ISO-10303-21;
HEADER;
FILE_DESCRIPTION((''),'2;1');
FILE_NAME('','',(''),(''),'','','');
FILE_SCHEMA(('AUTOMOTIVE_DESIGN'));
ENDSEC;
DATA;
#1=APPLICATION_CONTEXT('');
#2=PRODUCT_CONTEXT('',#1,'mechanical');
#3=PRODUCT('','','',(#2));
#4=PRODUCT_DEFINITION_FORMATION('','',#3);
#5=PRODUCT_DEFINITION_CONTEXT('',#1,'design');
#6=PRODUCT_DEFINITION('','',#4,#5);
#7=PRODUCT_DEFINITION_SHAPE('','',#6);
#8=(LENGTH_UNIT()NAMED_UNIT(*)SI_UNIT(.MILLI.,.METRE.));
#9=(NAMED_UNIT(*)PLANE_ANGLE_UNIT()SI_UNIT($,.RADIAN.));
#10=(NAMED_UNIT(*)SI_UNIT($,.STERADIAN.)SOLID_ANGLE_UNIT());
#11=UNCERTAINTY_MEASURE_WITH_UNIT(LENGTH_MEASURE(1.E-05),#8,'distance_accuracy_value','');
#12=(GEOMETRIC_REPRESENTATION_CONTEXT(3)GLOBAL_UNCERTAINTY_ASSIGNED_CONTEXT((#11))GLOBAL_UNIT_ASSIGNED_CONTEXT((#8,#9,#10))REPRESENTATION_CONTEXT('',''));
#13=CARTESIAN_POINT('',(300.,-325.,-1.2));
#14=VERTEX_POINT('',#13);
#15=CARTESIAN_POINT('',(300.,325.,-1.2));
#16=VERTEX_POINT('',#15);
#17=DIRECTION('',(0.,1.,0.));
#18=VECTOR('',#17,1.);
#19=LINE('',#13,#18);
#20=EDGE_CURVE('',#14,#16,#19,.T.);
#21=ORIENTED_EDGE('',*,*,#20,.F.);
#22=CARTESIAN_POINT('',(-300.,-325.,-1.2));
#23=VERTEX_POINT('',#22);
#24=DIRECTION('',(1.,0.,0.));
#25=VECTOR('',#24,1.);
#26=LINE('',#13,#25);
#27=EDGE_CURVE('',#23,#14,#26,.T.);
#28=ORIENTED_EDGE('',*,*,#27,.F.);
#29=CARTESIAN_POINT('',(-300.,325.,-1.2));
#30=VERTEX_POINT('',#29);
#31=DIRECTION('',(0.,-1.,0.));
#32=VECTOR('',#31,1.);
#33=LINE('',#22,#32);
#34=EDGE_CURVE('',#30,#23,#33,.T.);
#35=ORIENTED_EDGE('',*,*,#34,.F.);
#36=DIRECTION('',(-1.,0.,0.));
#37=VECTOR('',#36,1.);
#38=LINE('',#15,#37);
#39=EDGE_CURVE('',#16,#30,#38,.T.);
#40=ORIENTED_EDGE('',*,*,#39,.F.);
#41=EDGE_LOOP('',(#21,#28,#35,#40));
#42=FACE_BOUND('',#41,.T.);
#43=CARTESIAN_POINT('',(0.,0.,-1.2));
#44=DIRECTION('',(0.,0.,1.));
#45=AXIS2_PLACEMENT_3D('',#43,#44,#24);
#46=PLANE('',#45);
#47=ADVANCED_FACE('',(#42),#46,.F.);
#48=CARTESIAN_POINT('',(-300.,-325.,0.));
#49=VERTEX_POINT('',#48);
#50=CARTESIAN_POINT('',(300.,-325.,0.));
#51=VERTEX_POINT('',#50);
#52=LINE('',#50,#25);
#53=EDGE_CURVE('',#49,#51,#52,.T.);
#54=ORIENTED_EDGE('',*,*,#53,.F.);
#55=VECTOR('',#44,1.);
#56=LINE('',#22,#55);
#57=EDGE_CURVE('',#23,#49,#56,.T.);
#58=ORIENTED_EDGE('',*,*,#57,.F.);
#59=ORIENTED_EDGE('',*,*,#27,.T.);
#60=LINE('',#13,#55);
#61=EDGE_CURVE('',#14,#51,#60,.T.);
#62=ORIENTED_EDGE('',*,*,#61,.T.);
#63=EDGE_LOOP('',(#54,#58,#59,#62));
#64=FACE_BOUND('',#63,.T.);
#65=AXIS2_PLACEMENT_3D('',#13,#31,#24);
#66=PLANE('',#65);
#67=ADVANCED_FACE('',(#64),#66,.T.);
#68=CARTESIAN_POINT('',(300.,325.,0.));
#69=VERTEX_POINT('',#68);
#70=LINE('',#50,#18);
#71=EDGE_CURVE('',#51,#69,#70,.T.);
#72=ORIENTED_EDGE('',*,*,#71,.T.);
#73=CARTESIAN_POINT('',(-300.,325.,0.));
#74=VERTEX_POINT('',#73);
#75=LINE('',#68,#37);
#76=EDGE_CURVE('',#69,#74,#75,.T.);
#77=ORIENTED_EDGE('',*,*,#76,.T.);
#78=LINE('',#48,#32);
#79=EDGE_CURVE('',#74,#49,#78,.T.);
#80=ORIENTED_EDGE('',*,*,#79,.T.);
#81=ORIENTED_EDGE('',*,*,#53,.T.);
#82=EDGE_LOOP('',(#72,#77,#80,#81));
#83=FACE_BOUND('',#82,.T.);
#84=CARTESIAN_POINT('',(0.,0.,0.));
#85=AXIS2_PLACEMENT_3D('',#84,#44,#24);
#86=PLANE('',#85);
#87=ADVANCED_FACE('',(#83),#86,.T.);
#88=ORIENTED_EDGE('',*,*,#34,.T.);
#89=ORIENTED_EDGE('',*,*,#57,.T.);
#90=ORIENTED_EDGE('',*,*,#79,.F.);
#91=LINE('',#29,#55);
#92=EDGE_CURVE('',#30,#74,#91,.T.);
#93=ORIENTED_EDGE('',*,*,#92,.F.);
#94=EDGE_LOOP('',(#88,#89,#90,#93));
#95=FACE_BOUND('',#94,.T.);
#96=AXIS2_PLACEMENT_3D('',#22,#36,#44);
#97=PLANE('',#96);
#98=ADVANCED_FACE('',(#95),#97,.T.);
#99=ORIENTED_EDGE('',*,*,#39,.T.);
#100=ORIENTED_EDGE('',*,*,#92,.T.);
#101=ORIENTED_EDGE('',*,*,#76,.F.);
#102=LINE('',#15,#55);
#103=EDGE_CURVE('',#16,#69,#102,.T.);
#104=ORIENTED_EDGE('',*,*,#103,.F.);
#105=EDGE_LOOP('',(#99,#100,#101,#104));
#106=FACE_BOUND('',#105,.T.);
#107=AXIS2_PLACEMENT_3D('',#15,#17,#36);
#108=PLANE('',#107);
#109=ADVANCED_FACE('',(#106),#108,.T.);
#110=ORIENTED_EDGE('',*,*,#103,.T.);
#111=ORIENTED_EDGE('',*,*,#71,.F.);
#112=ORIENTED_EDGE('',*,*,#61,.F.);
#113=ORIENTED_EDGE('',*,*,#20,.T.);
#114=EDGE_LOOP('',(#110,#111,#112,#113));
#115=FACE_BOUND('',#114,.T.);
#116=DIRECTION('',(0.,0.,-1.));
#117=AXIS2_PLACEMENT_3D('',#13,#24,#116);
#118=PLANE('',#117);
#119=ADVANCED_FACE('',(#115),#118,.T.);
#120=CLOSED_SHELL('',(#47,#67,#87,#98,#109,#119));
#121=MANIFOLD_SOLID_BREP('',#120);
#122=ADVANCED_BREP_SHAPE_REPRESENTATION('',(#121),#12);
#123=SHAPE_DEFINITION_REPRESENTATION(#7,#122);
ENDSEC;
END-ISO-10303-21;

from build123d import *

# Parameters (mm, degrees)
SKETCH1_W          = 600
SKETCH1_H          = 650
BASE_FLANGE1_DEPTH = 1.2


# Sheet-metal steps are written as plain solids
with BuildPart() as part:
    # Sketch1 → Base-Flange1 (new body)
    with BuildSketch(Plane.XY):
        Rectangle(SKETCH1_W, SKETCH1_H)
    extrude(amount=-BASE_FLANGE1_DEPTH)


solid = part.part
